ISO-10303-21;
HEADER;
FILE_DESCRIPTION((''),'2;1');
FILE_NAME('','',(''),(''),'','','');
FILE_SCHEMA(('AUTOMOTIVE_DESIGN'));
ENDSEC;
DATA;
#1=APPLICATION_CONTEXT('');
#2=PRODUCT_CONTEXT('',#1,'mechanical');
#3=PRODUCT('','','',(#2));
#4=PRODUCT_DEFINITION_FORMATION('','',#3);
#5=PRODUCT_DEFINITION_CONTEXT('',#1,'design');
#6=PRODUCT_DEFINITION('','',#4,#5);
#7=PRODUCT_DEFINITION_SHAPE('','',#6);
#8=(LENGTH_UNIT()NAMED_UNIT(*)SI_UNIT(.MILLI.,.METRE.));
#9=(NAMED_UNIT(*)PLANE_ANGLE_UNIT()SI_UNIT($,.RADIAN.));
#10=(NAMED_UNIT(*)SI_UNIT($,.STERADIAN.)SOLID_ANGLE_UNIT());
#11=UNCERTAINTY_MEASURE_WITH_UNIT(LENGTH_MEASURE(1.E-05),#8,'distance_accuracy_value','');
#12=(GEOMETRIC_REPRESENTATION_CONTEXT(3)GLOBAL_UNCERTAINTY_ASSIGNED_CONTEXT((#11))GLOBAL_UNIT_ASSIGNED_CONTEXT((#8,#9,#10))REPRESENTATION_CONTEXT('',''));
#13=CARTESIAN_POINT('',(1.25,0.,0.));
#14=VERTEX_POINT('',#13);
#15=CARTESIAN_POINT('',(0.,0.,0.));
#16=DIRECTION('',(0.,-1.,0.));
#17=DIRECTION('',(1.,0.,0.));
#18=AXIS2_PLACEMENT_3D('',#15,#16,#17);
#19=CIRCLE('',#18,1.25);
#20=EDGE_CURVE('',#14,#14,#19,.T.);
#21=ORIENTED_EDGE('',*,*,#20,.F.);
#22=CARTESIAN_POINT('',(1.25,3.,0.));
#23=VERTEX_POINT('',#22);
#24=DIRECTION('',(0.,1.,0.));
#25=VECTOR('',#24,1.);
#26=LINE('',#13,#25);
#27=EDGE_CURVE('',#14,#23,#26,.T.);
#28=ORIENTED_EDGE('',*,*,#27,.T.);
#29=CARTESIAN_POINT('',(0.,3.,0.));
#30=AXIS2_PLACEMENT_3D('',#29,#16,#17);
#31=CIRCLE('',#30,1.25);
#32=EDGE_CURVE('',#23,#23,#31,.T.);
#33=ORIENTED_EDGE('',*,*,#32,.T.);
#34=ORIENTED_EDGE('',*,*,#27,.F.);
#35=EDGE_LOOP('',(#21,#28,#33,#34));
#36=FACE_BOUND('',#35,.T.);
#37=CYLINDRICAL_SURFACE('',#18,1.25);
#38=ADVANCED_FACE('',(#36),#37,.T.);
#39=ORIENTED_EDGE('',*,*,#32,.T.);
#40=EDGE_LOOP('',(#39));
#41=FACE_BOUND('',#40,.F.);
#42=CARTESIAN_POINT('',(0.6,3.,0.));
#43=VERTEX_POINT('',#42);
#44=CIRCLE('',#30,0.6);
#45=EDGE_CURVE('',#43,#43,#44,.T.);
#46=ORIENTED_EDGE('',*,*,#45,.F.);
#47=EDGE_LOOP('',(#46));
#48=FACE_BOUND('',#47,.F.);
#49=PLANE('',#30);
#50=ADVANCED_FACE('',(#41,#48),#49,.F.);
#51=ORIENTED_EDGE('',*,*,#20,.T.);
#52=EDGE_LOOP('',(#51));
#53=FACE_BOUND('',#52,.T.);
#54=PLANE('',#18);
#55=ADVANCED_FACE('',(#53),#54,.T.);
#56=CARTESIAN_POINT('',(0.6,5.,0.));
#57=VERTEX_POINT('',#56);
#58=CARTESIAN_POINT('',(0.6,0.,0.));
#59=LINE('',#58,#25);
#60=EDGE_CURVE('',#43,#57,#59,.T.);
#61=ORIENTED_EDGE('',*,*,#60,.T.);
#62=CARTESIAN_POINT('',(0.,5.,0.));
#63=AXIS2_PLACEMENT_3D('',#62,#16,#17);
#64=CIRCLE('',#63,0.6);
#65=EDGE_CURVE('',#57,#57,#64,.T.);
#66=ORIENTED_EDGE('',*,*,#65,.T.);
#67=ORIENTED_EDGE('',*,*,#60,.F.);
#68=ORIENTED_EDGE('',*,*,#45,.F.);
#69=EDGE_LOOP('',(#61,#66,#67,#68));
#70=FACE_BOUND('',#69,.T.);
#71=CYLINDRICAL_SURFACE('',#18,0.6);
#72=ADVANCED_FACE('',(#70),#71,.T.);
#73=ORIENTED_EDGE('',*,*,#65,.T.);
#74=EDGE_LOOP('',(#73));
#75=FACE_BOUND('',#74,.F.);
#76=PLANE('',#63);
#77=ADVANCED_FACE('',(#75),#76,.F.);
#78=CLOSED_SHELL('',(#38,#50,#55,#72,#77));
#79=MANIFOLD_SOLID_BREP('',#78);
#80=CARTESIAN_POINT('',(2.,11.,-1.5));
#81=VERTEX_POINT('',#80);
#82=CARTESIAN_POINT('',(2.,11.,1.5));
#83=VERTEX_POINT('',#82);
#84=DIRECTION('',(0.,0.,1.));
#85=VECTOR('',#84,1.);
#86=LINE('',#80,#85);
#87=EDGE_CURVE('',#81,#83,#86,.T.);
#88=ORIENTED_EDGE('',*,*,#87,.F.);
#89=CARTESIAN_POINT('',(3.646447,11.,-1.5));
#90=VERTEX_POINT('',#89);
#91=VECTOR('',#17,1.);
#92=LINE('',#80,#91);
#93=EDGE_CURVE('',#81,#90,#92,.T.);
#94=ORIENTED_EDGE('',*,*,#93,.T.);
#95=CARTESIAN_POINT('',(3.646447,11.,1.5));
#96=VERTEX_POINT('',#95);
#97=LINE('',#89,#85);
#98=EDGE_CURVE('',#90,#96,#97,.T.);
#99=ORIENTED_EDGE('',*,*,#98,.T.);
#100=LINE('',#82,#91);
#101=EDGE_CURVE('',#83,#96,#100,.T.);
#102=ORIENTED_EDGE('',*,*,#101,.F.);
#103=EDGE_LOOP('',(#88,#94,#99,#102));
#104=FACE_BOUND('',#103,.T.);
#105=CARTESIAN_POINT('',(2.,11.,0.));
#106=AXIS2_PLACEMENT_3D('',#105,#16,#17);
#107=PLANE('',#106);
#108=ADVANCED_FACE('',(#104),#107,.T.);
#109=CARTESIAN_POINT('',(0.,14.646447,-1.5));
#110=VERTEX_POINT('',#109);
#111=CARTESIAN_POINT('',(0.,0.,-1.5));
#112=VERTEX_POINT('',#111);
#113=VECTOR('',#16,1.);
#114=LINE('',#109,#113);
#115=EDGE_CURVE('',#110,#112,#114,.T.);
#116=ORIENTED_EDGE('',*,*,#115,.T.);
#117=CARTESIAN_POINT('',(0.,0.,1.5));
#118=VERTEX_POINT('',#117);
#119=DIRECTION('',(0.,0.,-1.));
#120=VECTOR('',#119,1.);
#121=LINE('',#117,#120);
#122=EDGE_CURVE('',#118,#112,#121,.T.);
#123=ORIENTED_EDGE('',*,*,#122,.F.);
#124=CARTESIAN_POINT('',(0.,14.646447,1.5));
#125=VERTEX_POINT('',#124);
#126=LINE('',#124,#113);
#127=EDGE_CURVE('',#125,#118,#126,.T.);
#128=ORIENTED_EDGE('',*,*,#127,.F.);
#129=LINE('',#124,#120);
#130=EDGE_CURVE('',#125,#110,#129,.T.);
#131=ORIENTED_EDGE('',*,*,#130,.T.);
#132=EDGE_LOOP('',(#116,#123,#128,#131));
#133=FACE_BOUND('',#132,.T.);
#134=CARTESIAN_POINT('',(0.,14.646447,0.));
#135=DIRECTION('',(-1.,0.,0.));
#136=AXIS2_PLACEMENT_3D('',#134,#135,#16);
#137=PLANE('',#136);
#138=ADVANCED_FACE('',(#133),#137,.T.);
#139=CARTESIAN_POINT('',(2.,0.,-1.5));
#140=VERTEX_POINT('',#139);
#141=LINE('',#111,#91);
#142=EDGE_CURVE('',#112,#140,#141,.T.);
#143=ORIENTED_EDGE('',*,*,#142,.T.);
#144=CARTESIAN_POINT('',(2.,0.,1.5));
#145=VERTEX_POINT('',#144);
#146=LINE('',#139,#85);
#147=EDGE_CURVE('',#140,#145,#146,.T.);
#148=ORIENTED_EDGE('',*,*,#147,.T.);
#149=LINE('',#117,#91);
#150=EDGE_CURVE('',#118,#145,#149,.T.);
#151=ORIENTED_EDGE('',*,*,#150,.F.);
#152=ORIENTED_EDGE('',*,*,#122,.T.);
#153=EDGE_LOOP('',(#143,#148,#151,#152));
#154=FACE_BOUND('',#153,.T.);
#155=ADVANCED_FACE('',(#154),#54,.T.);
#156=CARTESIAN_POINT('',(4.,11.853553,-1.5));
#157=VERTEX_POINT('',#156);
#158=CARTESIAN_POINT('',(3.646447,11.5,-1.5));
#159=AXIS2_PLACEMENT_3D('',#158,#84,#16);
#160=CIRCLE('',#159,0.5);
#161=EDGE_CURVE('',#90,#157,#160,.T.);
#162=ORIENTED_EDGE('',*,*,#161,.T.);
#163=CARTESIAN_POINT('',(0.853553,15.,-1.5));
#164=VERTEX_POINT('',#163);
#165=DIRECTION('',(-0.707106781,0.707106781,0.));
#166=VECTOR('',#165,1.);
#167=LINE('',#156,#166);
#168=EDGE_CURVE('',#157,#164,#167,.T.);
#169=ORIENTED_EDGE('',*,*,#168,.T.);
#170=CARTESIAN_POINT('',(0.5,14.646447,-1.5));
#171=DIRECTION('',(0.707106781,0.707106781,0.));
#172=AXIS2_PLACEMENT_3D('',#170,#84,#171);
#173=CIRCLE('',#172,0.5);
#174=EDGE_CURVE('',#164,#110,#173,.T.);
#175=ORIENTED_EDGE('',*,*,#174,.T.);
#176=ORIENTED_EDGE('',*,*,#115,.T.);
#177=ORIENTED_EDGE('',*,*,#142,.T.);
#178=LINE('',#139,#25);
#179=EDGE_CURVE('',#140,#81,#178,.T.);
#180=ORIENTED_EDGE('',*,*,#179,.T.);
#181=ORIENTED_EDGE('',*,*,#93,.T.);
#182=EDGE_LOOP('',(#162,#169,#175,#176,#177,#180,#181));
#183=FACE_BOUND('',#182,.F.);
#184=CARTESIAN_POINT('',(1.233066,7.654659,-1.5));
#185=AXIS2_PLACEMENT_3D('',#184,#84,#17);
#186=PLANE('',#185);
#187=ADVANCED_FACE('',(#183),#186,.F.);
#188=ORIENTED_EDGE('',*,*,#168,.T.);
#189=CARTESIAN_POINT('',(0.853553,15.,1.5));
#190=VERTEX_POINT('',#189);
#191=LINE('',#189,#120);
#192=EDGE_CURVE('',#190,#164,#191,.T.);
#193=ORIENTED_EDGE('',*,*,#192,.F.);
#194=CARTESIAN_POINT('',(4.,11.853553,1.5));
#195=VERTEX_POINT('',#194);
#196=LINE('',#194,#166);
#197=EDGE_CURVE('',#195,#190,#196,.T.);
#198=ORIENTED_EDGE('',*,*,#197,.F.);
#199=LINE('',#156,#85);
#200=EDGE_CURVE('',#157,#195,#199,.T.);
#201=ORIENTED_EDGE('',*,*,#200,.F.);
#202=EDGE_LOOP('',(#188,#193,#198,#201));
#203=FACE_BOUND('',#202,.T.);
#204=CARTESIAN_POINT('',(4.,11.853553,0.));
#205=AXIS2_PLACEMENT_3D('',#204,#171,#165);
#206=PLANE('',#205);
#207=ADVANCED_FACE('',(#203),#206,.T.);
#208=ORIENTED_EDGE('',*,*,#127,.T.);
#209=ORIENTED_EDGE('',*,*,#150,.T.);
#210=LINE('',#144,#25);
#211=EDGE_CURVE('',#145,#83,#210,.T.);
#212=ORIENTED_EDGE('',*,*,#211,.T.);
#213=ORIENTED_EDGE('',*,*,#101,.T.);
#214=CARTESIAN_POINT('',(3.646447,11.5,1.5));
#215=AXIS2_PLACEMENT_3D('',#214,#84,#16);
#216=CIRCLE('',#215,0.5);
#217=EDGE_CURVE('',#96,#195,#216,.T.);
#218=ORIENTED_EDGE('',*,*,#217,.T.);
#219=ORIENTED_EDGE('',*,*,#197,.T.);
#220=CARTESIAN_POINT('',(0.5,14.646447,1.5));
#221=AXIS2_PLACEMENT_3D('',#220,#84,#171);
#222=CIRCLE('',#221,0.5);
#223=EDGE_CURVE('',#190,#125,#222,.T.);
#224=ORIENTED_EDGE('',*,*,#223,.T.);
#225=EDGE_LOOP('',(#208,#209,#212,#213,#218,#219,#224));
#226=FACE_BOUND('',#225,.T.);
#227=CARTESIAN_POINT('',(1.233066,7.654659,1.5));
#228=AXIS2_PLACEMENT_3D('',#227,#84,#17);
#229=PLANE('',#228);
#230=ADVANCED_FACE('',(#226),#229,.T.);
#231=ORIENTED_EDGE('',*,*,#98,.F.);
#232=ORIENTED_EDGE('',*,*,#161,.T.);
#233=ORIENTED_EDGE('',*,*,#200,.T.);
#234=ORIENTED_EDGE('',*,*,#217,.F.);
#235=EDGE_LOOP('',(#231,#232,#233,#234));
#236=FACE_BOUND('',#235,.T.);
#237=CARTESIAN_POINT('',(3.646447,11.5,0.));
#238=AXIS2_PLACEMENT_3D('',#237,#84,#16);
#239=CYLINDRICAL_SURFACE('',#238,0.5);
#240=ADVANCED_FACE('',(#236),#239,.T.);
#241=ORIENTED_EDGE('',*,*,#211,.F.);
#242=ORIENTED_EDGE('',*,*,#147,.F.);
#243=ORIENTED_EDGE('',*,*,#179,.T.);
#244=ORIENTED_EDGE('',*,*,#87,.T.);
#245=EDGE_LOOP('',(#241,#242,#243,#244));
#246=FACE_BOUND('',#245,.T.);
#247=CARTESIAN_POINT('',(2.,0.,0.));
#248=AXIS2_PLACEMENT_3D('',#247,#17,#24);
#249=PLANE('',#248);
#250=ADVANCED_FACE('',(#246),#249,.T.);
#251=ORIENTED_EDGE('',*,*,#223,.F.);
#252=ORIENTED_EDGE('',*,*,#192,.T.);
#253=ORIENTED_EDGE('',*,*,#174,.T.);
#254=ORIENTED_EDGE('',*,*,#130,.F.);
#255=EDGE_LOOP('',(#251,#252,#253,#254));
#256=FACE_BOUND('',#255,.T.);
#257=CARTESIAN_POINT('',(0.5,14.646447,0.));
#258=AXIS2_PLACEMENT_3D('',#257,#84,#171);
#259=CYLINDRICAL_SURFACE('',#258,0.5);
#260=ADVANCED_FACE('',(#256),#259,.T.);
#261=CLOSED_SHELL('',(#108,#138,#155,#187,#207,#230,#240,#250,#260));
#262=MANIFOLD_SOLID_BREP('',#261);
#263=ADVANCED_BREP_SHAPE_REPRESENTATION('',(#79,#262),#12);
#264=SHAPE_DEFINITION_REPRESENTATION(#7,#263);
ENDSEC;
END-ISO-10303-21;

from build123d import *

# Parameters (mm, degrees)
F2_DEPTH = 1.5
F1_R     = 0.6
F3_DEPTH = 5
F1_R_2   = 1.25
F4_DEPTH = 3


with BuildPart() as f2:
    # F0 (on Top) → F2 (new body, symmetric)
    with BuildSketch(Plane.XY):
        with BuildLine():
            Line((0, 11), (0, 0))
            Line((0, 0), (2, 0))
            Line((2, 0), (2, 11))
            Line((2, 11), (3.6464466094, 11))
            ThreePointArc((3.6464466094, 11), (4.1083863757, 11.3086582838), (4, 11.8535533906))
            Line((4, 11.8535533906), (0.8535533906, 15))
            ThreePointArc((0.8535533906, 15), (0.3086582838, 15.1083863757), (0, 14.6464466094))
            Line((0, 14.6464466094), (0, 11))
        make_face()
    extrude(amount=F2_DEPTH, both=True)


with BuildPart() as f3:
    # F1 (on Front) → F3 (new body)
    with BuildSketch(Plane.XZ):
        Circle(F1_R)
    extrude(amount=-F3_DEPTH)

    # F1 (on Front) → F4 (join)
    with BuildSketch(Plane.XZ):
        Circle(F1_R_2)
        Circle(F1_R, mode=Mode.SUBTRACT)
    extrude(amount=-F4_DEPTH)


solid = Compound([f2.part, f3.part])
